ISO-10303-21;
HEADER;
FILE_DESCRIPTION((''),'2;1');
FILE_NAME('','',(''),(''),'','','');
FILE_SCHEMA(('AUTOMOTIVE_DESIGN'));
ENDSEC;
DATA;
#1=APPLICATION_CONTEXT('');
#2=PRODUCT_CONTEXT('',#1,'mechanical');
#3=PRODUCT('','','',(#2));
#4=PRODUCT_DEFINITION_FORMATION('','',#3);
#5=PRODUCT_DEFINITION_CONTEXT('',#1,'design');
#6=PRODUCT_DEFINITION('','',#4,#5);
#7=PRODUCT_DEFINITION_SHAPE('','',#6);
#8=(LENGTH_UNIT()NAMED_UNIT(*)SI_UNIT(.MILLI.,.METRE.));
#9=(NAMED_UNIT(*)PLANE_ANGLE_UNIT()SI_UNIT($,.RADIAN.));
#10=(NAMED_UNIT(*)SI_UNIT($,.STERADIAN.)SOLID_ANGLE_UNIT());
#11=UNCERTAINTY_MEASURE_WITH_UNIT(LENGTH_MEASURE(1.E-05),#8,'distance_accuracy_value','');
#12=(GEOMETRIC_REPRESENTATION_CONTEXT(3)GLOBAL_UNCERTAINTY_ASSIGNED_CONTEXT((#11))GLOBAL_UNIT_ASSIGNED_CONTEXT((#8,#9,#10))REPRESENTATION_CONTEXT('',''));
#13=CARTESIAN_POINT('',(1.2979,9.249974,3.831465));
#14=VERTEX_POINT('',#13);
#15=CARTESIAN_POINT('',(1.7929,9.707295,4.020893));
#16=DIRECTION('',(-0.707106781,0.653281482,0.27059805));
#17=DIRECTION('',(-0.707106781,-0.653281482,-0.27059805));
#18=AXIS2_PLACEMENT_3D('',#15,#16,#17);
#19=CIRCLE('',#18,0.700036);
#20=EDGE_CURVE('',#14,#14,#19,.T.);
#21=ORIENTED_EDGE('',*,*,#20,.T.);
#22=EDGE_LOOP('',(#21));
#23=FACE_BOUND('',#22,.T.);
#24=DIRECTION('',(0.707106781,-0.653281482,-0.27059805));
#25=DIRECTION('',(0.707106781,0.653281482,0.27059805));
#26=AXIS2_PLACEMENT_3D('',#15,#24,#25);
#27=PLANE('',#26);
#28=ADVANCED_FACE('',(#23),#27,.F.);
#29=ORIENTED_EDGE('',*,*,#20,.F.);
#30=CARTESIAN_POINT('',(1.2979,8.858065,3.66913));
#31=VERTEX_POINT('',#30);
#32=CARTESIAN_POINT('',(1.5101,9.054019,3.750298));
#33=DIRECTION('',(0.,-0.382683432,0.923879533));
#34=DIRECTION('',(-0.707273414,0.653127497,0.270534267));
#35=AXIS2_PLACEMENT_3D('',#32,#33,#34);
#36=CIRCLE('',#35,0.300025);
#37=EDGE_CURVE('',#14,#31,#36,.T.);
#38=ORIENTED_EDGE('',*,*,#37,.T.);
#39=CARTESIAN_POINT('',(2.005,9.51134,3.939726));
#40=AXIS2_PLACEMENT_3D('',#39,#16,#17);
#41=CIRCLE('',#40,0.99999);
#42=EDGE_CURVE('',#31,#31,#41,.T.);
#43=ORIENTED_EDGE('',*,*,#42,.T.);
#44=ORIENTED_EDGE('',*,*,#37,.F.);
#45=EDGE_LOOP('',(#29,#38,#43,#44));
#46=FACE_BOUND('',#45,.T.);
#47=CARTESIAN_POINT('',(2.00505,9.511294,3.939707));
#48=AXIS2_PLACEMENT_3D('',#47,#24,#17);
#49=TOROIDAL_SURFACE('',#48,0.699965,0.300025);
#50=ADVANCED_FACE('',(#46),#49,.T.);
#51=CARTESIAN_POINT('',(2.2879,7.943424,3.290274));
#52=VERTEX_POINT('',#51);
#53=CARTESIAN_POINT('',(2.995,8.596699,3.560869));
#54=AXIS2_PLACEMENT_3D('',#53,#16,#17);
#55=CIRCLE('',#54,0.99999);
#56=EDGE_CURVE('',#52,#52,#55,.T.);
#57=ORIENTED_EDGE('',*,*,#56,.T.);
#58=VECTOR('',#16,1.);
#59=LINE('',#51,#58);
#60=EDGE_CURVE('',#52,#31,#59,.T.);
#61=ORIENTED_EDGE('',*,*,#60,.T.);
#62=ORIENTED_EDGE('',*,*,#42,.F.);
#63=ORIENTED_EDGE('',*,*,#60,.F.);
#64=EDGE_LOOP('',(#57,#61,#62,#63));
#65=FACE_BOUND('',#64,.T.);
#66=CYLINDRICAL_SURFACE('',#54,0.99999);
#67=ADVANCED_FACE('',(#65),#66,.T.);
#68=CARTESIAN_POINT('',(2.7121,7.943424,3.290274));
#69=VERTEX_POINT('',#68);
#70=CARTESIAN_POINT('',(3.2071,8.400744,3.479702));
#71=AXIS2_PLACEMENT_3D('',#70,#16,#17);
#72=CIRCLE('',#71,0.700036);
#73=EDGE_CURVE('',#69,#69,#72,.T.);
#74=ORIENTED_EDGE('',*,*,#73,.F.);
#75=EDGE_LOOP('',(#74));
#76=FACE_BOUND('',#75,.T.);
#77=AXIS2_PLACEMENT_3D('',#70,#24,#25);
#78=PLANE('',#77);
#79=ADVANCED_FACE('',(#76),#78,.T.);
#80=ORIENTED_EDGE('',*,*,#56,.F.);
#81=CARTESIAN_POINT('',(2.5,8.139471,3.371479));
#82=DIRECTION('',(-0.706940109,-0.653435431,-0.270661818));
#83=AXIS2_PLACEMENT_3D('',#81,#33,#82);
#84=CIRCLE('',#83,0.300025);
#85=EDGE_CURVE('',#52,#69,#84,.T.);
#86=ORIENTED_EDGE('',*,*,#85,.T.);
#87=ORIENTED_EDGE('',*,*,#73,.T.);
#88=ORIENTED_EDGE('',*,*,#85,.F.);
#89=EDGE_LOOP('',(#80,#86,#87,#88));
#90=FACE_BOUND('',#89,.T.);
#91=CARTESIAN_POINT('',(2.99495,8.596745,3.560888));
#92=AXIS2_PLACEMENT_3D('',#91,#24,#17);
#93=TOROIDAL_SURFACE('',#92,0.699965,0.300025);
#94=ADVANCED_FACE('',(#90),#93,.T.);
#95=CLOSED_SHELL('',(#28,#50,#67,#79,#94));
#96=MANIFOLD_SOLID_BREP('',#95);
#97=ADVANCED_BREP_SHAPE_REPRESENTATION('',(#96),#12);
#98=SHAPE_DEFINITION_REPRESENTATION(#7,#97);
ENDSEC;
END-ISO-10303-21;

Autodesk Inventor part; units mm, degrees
ref_plane "YZ Plane" through (0, 0, 0) normal (1, 0, 0) x (0, 1, 0)
ref_plane "XZ Plane" through (0, 0, 0) normal (0, 1, 0) x (-1, 0, 0)
ref_plane "XY Plane" through (0, 0, 0) normal (0, 0, 1) x (1, 0, 0)
sketch "Sketch_1" plane through (0, 0, 0) normal (0, -0.3826834, 0.9238795) x (1, 0, 0)
  line L0 (1.7929, 10.5071) -> (3.2071, 9.0929)
  line L1 (3.2071, 9.0929) -> (2.7121, 8.5979)
  arc A0 (2.2879, 8.5979) -> (2.7121, 8.5979) centre (2.5, 8.8101) ccw
  line L2 (2.2879, 8.5979) -> (1.2979, 9.5879)
  arc A1 (1.2979, 10.0121) -> (1.2979, 9.5879) centre (1.5101, 9.8) ccw
  line L3 (1.2979, 10.0121) -> (1.7929, 10.5071)
  line L4 (1.7929, 10.5071) -> (3.2071, 9.0929)
revolve "Revolution1" add sketch "Sketch_1" angle 360 about axis through (1.7929, 9.7073, 4.0209) along (-0.7071068, 0.6532815, 0.2705981)
properties part number "CRBT155A_PART4"
